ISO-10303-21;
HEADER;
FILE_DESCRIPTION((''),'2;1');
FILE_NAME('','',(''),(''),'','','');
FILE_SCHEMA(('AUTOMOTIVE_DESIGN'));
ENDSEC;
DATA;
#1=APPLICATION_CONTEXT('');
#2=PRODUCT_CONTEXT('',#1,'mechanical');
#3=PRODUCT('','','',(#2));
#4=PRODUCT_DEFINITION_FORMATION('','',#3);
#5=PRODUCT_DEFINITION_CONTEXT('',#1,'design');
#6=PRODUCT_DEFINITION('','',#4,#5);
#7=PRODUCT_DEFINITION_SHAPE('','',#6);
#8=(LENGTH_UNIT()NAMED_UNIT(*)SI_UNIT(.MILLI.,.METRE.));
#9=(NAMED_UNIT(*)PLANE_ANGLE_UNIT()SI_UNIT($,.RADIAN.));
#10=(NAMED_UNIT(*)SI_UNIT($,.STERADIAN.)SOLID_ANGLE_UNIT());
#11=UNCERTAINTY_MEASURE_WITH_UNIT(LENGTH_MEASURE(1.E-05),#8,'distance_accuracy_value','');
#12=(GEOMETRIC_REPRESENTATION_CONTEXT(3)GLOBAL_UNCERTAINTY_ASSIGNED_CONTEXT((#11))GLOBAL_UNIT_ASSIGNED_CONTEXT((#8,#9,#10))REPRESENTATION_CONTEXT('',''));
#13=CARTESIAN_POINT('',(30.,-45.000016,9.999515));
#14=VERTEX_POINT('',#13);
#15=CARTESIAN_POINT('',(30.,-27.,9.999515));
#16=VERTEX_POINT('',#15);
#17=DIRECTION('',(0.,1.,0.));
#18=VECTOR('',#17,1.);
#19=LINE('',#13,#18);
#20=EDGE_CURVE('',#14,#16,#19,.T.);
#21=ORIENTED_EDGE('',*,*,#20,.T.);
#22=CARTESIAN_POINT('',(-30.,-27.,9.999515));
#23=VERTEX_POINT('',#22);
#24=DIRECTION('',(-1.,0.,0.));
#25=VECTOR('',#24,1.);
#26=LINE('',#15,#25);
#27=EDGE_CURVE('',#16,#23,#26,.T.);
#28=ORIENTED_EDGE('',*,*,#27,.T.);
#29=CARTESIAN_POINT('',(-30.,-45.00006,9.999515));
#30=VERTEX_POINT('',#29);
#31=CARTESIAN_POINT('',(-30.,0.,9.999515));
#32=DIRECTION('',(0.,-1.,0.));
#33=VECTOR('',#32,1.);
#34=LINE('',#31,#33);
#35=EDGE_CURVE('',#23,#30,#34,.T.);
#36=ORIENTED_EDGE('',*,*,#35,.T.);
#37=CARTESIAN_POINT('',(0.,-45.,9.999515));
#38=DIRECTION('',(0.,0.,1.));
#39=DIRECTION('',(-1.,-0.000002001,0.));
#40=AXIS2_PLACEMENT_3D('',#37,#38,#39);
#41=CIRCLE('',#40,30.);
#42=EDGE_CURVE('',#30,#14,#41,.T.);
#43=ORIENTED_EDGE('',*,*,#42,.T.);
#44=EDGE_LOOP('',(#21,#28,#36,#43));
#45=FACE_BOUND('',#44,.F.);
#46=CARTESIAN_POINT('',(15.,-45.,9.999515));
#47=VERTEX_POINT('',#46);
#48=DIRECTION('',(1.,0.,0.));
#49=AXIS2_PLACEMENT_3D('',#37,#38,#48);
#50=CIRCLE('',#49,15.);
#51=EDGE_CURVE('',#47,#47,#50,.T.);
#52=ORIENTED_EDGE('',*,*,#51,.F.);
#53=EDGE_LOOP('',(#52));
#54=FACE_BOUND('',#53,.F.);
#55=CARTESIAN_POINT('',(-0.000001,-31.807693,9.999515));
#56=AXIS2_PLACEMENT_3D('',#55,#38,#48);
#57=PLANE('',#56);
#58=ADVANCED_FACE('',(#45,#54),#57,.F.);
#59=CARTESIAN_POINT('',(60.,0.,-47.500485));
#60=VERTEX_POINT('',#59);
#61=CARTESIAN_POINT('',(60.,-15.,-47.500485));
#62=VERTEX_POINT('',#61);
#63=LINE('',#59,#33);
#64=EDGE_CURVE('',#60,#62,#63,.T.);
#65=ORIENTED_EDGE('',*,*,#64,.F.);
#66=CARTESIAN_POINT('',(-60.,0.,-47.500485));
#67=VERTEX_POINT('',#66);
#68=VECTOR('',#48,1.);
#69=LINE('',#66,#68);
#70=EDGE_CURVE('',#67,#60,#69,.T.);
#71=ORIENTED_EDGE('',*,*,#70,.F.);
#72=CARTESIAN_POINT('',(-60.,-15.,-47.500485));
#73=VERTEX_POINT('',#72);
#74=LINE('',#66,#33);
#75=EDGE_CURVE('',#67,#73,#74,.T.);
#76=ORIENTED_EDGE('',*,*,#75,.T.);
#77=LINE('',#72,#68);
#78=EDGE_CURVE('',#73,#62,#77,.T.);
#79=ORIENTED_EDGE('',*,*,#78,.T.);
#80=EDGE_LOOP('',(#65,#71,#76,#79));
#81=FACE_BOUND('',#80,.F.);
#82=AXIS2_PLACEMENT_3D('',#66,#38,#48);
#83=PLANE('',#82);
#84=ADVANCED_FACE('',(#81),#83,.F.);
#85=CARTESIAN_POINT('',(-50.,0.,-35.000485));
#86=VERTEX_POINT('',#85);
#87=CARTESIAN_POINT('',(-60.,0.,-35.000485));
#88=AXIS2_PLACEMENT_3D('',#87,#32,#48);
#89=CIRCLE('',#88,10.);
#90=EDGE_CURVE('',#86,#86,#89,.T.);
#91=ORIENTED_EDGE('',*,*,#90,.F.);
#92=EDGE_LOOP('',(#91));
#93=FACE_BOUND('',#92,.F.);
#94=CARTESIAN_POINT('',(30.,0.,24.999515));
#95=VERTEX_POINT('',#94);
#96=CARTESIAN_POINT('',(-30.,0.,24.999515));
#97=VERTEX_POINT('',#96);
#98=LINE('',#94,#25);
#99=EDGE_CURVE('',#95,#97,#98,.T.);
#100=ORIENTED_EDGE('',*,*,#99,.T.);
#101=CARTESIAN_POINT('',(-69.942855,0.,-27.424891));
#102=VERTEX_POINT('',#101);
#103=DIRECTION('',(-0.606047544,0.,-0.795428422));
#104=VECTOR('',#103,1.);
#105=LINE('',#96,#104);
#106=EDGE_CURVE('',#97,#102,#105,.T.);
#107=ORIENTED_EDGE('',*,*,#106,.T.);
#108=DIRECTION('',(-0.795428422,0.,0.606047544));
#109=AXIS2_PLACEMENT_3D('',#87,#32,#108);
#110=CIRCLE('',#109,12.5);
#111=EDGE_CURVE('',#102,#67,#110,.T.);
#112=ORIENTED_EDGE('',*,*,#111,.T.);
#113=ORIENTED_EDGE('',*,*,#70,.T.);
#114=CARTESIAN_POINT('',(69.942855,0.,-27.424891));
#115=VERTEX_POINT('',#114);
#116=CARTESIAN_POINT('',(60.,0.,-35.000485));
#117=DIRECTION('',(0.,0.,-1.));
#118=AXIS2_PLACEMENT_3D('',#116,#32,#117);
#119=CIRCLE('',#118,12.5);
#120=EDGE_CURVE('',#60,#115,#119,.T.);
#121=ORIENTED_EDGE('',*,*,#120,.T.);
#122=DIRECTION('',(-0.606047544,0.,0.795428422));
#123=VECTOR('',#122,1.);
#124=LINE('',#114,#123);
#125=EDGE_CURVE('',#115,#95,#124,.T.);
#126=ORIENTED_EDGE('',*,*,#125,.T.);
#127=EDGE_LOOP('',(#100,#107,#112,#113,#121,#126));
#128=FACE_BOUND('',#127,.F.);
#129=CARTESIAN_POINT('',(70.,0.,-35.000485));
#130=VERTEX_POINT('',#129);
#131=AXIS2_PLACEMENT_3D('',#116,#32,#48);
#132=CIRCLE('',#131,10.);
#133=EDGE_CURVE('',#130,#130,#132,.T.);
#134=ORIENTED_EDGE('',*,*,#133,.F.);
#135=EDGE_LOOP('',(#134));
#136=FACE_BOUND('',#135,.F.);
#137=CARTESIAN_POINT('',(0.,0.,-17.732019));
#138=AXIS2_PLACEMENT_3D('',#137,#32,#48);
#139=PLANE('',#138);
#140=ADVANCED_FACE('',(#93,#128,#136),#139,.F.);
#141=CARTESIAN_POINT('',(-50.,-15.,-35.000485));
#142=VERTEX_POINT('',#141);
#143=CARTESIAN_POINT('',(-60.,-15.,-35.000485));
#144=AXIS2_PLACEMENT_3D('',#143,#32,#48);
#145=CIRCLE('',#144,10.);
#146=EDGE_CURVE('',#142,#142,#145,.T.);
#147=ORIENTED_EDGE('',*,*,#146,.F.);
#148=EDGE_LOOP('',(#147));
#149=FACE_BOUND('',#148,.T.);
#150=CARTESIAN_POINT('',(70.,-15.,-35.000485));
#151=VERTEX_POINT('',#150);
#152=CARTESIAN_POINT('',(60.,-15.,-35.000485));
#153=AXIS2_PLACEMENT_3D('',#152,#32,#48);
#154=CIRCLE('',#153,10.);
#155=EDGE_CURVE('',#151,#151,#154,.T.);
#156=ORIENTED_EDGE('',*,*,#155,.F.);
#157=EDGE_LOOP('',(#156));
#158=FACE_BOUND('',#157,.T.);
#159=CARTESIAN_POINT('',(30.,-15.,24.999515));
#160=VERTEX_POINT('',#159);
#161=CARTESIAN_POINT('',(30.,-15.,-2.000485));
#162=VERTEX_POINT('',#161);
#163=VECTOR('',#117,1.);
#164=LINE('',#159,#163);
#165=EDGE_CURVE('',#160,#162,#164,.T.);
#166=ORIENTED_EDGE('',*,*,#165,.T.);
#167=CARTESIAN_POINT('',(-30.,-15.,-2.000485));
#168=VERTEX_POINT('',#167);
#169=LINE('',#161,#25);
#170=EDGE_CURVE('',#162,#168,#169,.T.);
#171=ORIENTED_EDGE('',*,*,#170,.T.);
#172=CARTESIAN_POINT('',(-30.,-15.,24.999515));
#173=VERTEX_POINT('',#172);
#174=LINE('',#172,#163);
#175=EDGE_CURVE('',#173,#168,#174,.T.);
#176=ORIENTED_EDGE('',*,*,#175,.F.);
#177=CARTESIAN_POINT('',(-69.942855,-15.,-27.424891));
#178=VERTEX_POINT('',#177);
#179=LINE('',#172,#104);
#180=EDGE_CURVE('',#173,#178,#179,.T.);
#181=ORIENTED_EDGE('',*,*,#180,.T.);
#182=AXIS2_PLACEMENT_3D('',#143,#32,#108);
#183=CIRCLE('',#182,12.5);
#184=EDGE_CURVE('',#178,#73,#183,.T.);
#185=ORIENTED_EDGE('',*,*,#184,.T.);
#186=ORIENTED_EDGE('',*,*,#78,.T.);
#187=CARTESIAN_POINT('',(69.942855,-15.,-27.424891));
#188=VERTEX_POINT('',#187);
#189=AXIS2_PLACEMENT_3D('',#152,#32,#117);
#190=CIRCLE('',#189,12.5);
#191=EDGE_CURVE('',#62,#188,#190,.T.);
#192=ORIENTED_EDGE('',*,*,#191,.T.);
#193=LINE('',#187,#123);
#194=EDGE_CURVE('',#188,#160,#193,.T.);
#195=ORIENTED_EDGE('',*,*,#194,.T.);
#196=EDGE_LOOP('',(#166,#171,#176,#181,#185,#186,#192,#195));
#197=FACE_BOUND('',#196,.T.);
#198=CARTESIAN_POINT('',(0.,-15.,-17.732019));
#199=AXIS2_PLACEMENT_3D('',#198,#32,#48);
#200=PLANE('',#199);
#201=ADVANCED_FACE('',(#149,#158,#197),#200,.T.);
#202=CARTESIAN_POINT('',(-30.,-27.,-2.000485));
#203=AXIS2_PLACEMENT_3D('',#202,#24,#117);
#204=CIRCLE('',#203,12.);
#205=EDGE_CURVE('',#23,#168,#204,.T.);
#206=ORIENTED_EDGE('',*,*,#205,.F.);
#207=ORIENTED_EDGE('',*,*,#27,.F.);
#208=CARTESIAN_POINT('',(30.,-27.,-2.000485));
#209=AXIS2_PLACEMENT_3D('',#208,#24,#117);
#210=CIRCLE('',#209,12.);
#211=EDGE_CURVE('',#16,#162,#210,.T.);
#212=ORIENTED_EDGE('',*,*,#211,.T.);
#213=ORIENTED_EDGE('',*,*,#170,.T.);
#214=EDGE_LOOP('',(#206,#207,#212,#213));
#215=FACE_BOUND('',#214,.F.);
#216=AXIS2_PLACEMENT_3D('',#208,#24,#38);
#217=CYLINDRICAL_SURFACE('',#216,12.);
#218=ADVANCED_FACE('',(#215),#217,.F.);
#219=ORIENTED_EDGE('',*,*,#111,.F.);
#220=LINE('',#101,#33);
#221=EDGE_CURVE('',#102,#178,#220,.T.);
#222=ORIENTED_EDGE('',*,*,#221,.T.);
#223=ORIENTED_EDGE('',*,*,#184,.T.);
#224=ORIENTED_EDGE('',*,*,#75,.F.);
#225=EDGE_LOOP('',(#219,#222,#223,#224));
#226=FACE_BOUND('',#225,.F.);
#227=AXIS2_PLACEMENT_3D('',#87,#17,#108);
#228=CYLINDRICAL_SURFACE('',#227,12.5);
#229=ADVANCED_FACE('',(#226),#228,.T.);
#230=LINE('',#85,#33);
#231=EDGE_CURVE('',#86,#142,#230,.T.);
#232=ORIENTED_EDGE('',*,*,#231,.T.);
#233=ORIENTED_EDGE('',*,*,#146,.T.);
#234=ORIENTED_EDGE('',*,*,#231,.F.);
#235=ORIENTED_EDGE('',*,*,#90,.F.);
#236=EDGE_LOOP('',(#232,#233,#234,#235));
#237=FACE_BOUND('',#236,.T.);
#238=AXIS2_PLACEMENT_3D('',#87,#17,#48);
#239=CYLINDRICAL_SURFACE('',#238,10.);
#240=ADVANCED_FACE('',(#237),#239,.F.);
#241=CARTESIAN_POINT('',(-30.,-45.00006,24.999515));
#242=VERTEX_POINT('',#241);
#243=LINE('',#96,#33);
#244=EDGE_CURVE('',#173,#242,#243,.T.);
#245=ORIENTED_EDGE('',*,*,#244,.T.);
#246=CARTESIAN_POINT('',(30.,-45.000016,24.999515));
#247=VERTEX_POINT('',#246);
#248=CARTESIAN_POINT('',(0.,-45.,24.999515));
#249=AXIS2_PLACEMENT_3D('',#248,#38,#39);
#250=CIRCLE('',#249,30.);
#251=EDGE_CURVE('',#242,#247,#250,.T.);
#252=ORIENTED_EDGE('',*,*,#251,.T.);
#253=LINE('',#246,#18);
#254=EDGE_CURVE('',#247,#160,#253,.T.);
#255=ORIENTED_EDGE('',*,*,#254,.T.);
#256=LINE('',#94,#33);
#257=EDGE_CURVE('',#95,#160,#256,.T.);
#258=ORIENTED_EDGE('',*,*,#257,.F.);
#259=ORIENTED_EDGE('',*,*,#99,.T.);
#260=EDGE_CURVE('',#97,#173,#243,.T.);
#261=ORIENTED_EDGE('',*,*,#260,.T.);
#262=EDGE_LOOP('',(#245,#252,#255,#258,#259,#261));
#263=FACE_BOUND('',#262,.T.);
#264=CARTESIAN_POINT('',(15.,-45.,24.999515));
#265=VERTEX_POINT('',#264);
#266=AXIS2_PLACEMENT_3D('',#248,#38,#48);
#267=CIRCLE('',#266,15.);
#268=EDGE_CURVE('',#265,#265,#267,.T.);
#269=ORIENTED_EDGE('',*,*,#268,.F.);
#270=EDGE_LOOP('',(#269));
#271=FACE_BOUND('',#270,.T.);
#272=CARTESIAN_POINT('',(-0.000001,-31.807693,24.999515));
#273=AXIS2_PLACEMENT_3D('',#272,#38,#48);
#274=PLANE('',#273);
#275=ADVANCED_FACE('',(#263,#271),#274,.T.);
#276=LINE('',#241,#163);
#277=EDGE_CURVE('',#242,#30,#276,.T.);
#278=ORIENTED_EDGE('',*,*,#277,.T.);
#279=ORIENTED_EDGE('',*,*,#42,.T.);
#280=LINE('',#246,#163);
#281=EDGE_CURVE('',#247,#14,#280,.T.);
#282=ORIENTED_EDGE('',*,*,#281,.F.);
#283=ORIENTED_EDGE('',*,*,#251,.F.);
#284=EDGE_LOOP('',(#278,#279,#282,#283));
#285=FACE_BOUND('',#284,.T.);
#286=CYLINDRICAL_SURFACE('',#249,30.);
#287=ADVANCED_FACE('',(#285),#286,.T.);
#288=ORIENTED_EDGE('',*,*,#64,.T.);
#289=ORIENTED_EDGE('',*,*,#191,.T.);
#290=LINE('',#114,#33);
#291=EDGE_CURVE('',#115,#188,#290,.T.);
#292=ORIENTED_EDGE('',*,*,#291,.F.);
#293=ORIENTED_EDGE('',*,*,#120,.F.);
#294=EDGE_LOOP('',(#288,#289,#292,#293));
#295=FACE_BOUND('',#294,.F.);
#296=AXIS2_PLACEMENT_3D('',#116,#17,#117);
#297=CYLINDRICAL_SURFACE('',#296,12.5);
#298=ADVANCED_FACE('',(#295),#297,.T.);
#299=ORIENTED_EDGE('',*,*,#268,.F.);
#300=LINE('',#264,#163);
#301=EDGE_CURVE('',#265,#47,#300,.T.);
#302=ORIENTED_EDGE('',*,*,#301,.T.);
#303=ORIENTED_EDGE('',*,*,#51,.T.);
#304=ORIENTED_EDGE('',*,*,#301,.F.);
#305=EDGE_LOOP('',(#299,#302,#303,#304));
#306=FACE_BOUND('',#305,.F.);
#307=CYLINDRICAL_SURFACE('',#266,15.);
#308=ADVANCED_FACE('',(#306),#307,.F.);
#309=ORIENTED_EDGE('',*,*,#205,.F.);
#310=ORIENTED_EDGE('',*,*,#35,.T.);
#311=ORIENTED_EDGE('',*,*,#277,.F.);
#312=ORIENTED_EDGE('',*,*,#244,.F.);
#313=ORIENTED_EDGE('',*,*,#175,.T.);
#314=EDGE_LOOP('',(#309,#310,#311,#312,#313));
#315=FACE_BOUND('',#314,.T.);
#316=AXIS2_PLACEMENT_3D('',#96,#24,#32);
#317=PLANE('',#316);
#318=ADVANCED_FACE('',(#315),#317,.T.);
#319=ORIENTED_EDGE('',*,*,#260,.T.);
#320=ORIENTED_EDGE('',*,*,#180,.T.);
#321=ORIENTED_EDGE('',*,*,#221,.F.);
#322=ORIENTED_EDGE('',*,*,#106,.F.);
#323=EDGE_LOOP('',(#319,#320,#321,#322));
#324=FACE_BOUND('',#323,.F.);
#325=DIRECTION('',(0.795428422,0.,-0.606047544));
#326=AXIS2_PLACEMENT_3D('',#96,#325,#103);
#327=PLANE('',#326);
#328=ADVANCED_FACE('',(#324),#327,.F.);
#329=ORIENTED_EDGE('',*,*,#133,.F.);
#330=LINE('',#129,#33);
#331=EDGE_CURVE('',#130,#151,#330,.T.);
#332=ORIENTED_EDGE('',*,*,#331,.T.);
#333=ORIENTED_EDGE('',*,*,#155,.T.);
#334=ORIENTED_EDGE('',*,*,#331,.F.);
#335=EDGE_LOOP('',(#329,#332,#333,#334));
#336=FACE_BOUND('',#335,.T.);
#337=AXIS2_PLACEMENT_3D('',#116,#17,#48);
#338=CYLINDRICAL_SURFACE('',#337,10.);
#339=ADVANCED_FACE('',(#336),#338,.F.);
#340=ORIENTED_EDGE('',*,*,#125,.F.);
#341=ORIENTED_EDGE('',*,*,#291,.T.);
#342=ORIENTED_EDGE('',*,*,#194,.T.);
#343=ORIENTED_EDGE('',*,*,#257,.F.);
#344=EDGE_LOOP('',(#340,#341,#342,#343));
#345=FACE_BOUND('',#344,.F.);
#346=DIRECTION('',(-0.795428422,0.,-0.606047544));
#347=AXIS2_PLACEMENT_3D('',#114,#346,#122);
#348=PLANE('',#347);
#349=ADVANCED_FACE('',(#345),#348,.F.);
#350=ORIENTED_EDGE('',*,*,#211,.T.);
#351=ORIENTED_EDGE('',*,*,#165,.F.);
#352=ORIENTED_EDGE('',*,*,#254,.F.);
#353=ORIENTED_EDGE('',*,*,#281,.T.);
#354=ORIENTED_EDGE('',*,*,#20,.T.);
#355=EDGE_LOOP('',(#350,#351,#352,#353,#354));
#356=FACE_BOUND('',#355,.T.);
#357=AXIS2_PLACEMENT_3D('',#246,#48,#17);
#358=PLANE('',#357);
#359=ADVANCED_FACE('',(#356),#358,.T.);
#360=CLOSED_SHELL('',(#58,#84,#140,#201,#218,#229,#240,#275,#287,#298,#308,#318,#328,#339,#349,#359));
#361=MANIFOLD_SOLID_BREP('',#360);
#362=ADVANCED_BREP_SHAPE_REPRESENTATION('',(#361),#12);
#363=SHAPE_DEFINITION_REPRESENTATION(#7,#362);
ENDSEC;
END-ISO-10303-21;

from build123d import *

# Parameters (mm, degrees)
F0_R     = 10
F1_DEPTH = 15
F3_R     = 15
F4_DEPTH = 15
F5_R     = 12


# Not quite as in the source:
# - ends of sketch curves that miss each other by under 0.0002 mm in the source are joined


with BuildPart() as f1:
    # F0 (on Front) → F1 (new body)
    with BuildSketch(Plane.XZ):
        with BuildLine():
            Line((-30, 24.9995148627), (-69.9428552721, -27.4248908346))
            ThreePointArc((-69.9428552721, -27.4248908346), (-71.2014492094, -40.5482356371), (-60, -47.5004851373))
            Line((-60, -47.5004851373), (60, -47.5004851373))
            ThreePointArc((60, -47.5004851373), (71.2014492094, -40.5482356371), (69.9428552721, -27.4248908346))
            Line((69.9428552721, -27.4248908346), (30, 24.9995148627))
            Line((30, 24.9995148627), (0, 24.9995148627))
            Line((0, 24.9995148627), (-30, 24.9995148627))
        make_face()
        with Locations((-60, -35.0004851373)):
            Circle(F0_R, mode=Mode.SUBTRACT)
        with Locations((60, -35.0004851373)):
            Circle(F0_R, mode=Mode.SUBTRACT)
    extrude(amount=F1_DEPTH)

    # F3 (on offset) → F4 (join)
    with BuildSketch(Plane.XY.offset(24.9995148627)):
        with BuildLine():
            Line((-30, -14.9999307469), (-30, -45.0000600332))
            ThreePointArc((-30, -45.0000600332), (2.21189e-05, -75), (30, -45.0000157953))
            Line((30, -45.0000157953), (30, -14.9999307469))
            Line((30, -14.9999307469), (30, 0))
            Line((30, 0), (-30, 0))
            Line((-30, 0), (-30, -14.9999307469))
        make_face()
        with Locations((0, -45)):
            Circle(F3_R, mode=Mode.SUBTRACT)
    extrude(amount=-F4_DEPTH)

    # F5
    f5_edges = [f1.edges().sort_by_distance(p)[0] for p in [
        (0, -15, 9.999515),
    ]]
    fillet(f5_edges, radius=F5_R)


solid = f1.part
